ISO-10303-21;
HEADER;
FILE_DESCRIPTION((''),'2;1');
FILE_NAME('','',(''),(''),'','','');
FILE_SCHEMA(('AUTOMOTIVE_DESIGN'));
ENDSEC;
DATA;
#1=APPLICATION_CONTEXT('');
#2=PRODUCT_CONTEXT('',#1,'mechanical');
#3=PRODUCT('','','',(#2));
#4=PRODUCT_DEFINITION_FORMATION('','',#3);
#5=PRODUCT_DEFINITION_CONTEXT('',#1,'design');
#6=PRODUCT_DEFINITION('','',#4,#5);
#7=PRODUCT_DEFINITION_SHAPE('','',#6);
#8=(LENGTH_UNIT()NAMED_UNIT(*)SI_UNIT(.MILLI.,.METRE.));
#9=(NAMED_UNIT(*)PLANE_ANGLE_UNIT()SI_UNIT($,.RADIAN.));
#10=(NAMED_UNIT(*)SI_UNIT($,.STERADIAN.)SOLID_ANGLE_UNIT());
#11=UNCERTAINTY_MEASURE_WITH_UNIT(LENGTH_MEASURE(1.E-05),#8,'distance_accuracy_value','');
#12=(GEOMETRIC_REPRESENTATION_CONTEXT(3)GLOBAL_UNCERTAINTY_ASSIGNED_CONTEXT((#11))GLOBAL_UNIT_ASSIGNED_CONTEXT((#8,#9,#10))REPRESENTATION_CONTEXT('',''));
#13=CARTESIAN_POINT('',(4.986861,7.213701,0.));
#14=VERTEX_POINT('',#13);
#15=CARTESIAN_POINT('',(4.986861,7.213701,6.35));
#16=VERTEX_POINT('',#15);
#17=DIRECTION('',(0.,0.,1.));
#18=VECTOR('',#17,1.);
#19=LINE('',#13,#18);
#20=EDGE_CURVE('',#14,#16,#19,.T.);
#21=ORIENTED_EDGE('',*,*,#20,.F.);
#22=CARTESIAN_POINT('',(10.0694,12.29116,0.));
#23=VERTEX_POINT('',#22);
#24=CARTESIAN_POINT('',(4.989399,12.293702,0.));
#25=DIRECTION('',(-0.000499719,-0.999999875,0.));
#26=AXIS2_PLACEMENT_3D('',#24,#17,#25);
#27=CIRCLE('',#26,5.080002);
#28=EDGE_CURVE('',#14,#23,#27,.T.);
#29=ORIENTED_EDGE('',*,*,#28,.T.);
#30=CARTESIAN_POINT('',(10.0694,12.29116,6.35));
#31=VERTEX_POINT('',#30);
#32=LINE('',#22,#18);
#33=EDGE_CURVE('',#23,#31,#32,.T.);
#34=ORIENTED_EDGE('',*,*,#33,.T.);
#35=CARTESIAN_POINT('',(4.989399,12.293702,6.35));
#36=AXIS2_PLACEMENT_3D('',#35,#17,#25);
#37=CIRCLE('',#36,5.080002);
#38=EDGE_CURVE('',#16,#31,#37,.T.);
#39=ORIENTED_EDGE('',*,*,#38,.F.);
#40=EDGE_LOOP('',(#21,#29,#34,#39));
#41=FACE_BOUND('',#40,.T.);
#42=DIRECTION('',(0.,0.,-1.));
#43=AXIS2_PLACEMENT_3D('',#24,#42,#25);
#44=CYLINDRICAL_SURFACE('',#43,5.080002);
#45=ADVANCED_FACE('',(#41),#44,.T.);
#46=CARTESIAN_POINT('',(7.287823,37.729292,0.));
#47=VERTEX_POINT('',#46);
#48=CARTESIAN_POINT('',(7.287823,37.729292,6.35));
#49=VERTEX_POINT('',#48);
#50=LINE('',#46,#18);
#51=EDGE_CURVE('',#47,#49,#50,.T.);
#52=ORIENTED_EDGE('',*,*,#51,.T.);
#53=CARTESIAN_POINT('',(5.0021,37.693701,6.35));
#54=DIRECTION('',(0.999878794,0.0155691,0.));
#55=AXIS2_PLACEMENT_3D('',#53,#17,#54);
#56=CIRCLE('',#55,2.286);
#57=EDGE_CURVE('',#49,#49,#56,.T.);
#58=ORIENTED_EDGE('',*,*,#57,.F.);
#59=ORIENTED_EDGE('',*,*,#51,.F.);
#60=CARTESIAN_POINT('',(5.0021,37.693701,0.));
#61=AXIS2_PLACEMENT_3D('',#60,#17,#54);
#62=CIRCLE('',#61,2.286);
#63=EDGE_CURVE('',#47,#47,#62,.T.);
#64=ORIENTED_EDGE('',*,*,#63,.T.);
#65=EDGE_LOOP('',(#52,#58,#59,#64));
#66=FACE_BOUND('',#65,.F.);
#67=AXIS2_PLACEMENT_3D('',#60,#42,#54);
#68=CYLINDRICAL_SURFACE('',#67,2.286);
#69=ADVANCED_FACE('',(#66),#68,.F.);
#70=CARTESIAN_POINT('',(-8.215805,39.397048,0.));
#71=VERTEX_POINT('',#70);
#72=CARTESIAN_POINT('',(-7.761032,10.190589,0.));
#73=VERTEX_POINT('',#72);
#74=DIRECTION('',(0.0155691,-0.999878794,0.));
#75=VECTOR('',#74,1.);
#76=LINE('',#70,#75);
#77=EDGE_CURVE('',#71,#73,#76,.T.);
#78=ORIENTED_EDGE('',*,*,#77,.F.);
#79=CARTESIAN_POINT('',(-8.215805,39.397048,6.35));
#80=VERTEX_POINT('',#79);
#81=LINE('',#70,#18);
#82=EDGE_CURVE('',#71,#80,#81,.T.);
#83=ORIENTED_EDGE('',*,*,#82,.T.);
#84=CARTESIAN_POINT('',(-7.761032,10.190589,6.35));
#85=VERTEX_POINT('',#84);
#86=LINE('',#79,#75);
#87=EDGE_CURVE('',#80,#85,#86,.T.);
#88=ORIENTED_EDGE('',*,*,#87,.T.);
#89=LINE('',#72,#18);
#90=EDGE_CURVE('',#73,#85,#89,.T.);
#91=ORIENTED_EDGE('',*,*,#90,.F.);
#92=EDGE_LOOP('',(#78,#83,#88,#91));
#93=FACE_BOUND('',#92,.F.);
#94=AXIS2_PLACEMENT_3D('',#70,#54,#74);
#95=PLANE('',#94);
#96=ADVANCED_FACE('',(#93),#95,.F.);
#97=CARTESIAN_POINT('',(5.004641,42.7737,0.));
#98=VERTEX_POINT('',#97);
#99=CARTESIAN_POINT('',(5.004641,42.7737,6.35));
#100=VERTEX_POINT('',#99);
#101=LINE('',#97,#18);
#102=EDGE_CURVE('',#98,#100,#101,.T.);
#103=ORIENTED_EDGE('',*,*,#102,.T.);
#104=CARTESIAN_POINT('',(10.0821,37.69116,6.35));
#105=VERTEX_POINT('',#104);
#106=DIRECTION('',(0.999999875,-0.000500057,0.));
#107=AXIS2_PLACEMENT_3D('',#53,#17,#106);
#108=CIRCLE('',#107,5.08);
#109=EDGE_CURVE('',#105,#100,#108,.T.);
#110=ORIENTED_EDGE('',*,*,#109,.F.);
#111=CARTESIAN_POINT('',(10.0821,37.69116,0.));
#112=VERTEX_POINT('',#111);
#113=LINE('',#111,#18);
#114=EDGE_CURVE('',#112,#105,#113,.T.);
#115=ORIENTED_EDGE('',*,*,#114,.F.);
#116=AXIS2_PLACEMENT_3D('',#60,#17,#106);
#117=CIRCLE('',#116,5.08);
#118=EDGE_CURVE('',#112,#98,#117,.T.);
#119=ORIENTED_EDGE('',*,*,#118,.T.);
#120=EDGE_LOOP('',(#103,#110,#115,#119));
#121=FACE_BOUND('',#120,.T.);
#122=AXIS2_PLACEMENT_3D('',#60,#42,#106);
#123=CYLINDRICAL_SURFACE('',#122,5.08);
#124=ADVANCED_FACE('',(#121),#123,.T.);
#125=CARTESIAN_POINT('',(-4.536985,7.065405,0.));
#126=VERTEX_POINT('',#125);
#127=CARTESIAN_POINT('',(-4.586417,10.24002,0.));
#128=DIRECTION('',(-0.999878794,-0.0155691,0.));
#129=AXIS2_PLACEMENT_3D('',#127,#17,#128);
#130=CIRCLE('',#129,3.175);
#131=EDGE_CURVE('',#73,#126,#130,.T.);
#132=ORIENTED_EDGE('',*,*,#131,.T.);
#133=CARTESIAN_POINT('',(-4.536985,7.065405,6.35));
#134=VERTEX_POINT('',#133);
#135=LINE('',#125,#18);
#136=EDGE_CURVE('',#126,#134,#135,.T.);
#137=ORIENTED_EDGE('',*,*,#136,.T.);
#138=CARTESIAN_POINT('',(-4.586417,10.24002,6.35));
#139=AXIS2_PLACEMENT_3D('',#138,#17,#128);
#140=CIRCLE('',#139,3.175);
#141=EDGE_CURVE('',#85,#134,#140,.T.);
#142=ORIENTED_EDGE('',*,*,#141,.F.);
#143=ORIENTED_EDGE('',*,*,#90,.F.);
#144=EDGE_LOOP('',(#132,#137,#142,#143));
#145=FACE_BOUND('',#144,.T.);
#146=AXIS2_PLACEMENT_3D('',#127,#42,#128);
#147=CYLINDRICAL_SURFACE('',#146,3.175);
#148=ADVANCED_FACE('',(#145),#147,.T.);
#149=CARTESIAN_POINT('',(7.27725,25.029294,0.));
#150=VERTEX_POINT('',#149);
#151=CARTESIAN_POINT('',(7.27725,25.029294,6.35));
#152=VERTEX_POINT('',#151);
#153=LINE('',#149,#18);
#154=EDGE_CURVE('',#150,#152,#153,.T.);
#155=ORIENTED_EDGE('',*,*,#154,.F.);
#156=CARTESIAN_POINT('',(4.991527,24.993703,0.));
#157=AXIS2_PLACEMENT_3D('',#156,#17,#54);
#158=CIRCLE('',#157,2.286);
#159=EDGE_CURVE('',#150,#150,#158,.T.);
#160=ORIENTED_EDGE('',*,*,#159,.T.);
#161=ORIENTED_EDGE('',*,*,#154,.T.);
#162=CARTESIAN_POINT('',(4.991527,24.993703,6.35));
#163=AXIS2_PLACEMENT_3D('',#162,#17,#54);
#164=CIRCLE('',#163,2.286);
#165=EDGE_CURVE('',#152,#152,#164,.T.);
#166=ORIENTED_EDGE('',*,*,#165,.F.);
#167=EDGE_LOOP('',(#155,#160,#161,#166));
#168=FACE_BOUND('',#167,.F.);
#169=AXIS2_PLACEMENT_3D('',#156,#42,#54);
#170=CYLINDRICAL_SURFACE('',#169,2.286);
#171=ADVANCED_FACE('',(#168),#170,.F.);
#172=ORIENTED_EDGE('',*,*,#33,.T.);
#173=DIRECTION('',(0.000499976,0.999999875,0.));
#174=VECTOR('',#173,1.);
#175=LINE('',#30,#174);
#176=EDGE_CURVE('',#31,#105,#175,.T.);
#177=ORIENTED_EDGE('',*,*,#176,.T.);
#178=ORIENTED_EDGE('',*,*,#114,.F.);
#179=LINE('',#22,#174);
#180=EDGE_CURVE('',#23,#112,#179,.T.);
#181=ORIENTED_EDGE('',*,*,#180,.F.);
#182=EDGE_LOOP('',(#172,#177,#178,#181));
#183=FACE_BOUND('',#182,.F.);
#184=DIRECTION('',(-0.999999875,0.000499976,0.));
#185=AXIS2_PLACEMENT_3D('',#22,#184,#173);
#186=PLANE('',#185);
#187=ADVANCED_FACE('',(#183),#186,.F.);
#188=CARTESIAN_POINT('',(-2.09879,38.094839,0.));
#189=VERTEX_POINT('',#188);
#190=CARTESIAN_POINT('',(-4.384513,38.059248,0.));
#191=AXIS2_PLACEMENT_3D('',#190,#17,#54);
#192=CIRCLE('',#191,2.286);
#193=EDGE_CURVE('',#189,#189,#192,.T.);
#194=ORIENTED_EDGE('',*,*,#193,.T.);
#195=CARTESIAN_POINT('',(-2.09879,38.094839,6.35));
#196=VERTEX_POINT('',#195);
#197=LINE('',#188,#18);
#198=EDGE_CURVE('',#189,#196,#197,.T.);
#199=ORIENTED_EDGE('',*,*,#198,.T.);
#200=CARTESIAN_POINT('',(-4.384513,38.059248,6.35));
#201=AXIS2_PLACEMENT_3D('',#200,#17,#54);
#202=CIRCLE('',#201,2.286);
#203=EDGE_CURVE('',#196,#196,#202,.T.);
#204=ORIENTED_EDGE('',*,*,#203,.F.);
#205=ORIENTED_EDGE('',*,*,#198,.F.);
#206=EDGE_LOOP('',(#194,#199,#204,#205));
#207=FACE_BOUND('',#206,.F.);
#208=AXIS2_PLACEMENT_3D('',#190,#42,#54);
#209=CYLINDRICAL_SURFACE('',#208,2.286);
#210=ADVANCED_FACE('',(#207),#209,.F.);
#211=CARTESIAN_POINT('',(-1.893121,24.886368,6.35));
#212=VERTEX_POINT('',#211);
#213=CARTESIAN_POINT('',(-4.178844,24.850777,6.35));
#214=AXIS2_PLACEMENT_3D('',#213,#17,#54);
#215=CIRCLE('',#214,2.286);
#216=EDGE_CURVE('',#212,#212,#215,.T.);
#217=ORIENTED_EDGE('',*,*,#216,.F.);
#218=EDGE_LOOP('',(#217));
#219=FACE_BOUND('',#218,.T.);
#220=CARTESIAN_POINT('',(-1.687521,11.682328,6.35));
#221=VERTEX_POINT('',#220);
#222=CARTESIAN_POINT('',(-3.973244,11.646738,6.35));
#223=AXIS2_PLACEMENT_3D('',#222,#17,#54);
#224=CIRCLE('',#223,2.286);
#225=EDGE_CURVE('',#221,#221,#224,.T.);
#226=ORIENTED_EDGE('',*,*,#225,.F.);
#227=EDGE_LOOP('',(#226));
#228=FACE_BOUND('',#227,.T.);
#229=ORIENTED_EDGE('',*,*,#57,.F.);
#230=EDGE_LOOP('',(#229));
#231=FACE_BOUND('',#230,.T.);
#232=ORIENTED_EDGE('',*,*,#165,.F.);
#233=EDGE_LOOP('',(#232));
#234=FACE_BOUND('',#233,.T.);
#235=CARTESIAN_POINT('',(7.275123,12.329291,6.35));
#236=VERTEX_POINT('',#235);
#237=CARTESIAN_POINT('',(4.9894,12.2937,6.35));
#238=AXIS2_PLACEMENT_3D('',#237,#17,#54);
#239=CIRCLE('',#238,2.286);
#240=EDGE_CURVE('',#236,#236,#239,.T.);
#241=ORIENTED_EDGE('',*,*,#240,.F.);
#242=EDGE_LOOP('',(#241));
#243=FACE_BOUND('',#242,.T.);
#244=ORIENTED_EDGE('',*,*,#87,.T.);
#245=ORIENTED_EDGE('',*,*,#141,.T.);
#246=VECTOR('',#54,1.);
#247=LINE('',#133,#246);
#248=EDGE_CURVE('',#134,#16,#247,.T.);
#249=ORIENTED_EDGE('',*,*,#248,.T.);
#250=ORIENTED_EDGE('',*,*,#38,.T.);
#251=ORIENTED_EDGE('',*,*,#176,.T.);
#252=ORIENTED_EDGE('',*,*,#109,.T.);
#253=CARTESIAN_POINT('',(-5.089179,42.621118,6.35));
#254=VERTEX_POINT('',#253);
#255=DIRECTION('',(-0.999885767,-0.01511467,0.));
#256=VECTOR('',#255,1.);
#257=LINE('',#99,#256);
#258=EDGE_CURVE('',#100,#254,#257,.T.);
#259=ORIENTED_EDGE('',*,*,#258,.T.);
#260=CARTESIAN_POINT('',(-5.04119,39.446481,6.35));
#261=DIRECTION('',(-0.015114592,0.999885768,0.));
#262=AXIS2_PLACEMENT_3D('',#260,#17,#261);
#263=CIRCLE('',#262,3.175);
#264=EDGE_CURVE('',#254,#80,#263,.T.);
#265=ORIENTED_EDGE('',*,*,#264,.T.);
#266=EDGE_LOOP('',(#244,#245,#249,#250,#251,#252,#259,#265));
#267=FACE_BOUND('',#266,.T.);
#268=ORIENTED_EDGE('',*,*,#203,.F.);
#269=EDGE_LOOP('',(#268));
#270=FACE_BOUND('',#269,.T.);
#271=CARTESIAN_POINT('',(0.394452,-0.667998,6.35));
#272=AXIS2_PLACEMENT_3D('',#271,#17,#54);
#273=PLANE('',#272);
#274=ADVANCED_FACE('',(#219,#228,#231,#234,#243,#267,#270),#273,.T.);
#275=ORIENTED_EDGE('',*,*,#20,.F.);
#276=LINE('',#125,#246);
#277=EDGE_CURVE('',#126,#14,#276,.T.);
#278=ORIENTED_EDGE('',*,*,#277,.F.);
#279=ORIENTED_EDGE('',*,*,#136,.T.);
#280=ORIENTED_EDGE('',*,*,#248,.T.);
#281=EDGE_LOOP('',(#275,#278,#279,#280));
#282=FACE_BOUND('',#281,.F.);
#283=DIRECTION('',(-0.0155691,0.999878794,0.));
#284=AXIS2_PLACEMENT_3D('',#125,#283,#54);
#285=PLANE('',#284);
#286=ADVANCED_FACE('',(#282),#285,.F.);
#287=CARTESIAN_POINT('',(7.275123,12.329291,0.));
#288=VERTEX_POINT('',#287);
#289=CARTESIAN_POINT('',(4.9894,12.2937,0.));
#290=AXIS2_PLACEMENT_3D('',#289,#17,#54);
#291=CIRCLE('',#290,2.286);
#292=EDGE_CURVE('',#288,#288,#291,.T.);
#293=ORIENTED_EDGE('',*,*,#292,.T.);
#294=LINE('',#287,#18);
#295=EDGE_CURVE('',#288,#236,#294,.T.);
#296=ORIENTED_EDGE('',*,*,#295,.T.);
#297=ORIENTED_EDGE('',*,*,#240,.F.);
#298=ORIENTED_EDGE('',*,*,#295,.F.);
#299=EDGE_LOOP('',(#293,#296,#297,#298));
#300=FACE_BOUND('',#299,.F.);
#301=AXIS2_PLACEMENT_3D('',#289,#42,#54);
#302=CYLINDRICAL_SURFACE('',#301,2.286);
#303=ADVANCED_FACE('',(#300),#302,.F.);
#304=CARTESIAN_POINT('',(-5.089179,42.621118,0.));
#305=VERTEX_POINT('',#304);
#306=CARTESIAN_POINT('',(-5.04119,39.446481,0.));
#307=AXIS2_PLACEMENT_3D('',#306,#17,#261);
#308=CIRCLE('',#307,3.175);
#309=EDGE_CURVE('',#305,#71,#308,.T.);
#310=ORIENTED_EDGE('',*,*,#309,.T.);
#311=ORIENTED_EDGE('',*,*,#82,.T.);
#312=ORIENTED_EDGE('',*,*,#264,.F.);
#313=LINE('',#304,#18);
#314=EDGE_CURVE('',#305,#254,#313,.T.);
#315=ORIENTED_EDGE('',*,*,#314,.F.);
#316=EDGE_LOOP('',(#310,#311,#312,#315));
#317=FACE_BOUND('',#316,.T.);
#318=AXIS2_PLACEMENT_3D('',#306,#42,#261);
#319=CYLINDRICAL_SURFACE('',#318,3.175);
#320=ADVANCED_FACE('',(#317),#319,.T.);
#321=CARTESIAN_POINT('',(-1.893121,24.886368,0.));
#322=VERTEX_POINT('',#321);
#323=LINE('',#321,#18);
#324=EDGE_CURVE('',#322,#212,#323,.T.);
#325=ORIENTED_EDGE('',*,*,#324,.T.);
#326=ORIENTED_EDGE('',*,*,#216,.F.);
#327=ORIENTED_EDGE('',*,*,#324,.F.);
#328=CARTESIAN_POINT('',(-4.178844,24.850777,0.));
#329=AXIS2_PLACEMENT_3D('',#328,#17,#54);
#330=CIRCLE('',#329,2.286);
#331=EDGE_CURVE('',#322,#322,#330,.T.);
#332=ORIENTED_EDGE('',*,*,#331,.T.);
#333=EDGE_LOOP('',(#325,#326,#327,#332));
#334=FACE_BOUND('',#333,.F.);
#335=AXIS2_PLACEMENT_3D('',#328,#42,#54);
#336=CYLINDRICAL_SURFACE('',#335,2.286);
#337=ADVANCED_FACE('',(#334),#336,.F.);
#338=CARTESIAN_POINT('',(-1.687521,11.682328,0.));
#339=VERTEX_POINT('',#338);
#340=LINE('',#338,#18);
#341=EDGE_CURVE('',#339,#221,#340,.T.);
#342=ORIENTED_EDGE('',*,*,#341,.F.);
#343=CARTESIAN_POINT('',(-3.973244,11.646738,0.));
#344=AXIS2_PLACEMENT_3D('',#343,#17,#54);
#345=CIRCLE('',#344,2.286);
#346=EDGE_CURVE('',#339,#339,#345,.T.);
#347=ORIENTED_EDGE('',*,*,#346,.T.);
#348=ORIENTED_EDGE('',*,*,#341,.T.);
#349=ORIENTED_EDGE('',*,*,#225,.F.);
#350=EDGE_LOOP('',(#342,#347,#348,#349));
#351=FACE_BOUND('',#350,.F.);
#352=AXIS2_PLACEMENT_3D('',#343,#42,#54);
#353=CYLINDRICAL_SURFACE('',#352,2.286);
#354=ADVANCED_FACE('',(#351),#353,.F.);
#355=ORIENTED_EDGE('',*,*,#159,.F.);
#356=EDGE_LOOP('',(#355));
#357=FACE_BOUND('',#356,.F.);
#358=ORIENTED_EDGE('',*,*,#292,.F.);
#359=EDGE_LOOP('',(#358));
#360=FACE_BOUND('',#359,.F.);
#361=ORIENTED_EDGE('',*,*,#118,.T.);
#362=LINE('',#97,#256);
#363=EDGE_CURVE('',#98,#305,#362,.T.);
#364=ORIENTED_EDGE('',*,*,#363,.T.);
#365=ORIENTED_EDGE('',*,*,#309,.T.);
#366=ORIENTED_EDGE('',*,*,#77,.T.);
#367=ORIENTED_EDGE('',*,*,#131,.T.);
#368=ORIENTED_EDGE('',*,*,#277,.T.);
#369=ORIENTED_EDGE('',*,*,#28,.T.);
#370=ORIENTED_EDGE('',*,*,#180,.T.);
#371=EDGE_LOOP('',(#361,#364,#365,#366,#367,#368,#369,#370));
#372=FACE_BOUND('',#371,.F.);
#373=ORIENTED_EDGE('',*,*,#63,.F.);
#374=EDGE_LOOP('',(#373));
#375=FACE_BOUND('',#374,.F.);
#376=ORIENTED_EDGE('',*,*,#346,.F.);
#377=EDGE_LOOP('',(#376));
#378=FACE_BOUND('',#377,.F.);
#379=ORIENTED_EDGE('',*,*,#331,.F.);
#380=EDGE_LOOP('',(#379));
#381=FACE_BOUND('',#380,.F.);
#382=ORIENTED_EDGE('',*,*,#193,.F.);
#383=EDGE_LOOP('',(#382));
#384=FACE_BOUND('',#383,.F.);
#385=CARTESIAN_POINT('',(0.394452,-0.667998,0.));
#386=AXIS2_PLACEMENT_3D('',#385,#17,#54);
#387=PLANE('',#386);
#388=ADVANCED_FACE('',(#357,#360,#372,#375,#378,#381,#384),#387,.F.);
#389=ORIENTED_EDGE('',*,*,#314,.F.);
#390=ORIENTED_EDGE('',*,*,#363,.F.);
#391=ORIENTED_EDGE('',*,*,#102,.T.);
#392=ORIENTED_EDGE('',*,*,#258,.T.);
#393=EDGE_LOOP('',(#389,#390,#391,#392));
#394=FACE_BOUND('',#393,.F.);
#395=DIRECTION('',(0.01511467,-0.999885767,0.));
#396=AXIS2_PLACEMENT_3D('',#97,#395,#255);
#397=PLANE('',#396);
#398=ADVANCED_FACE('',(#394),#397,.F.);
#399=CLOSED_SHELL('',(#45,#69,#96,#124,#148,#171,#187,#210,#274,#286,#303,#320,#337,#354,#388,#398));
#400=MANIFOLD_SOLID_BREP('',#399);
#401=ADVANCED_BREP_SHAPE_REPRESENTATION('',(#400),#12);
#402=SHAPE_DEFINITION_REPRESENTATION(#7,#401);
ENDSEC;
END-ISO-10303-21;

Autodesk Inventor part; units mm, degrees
ref_plane "YZ Plane" through (0, 0, 0) normal (1, 0, 0) x (0, 1, 0)
ref_plane "XZ Plane" through (0, 0, 0) normal (0, 1, 0) x (-1, 0, 0)
ref_plane "Work Plane1" through (0.394452, -0.667998, 0) normal (0, 0, 1) x (0.9998788, 0.0155691, 0)
sketch "Sketch1" plane through (0.394452, -0.667998, 0) normal (0, 0, 1) x (0.9998788, 0.0155691, 0)
  circle A0 centre (5.204347, 38.285312) radius 1.27
  circle A1 centre (5.004519, 25.586884) radius 1.27
  circle A2 centre (4.796193, 12.888588) radius 1.27
  line L0 (5.002396, 38.285413) -> (4.989697, 12.888491) construction
  line L1 (0.125003, 38.366943) -> (-0.283151, 12.970219)
  line L2 (9.875538, 12.806957) -> (10.283691, 38.203681)
  arc A3 (10.283691, 38.203681) -> (0.125003, 38.366943) centre (5.204347, 38.285312) ccw
  arc A4 (-0.283151, 12.970219) -> (9.875538, 12.806957) centre (4.796193, 12.888588) ccw
  circle A5 centre (4.796193, 12.888588) radius 2.286
  circle A6 centre (4.996047, 25.587018) radius 2.286
  circle A7 centre (5.204347, 38.285312) radius 2.286
  line L3 (4.714563, 7.809244) -> (-4.810437, 7.809244)
  line L4 (-7.985437, 10.984244) -> (-7.985437, 40.194244)
  line L5 (-4.808994, 43.369244) -> (5.285978, 43.364656)
  arc A8 (-7.985437, 10.984244) -> (-4.810437, 7.809244) centre (-4.810437, 10.984244) ccw
  arc A9 (-4.808994, 43.369244) -> (-7.985437, 40.194244) centre (-4.810437, 40.194244) ccw
  circle A10 centre (-4.175437, 12.381244) radius 2.286
  circle A11 centre (-4.175437, 25.586884) radius 2.286
  circle A12 centre (-4.175437, 38.796956) radius 2.286
  point P0 (-0.384004, 0.674059)
  point P1 (-7.985437, 7.809244)
  dimension "d0" = 10.16
  dimension "d1" = 4.572
  dimension "d2" = 4.572
  dimension "d3" = 4.572
  dimension "d4" = 12.7
  dimension "d6" = 3.175
  dimension "d7" = 3.175
  dimension "d8" = 35.56
  dimension "d18" = 3.81
  dimension "d19" = 4.572
  dimension "d20" = 4.572
  dimension "d21" = 4.572
sketch "Sketch1 outline for Extrusion1" plane through (0.394452, -0.667998, 0) normal (0, 0, 1) x (0.9998788, 0.0155691, 0)
  line L0 (5.285978, 43.364656) -> (-4.808994, 43.369244)
  arc A0 (10.283691, 38.203681) -> (5.285978, 43.364656) centre (5.204347, 38.285312) ccw
  arc A1 (-4.808994, 43.369244) -> (-7.985437, 40.194244) centre (-4.810437, 40.194244) ccw
  line L1 (9.875538, 12.806957) -> (10.283691, 38.203681)
  line L2 (-7.985437, 40.194244) -> (-7.985437, 10.984244)
  arc A2 (4.714563, 7.809244) -> (9.875538, 12.806957) centre (4.796193, 12.888588) ccw
  arc A3 (-7.985437, 10.984244) -> (-4.810437, 7.809244) centre (-4.810437, 10.984244) ccw
  line L3 (-4.810437, 7.809244) -> (4.714563, 7.809244)
  circle A4 centre (-4.175437, 12.381244) radius 2.286
  circle A5 centre (-4.175437, 25.586884) radius 2.286
  circle A6 centre (4.796193, 12.888588) radius 2.286
  circle A7 centre (4.996047, 25.587018) radius 2.286
  circle A8 centre (-4.175437, 38.796956) radius 2.286
  circle A9 centre (5.204347, 38.285312) radius 2.286
extrude "Extrusion1" add sketch "Sketch1 outline for Extrusion1" along normal blind 6.35
properties part number "OdomPods" material "Plastic, Opaque Black"
